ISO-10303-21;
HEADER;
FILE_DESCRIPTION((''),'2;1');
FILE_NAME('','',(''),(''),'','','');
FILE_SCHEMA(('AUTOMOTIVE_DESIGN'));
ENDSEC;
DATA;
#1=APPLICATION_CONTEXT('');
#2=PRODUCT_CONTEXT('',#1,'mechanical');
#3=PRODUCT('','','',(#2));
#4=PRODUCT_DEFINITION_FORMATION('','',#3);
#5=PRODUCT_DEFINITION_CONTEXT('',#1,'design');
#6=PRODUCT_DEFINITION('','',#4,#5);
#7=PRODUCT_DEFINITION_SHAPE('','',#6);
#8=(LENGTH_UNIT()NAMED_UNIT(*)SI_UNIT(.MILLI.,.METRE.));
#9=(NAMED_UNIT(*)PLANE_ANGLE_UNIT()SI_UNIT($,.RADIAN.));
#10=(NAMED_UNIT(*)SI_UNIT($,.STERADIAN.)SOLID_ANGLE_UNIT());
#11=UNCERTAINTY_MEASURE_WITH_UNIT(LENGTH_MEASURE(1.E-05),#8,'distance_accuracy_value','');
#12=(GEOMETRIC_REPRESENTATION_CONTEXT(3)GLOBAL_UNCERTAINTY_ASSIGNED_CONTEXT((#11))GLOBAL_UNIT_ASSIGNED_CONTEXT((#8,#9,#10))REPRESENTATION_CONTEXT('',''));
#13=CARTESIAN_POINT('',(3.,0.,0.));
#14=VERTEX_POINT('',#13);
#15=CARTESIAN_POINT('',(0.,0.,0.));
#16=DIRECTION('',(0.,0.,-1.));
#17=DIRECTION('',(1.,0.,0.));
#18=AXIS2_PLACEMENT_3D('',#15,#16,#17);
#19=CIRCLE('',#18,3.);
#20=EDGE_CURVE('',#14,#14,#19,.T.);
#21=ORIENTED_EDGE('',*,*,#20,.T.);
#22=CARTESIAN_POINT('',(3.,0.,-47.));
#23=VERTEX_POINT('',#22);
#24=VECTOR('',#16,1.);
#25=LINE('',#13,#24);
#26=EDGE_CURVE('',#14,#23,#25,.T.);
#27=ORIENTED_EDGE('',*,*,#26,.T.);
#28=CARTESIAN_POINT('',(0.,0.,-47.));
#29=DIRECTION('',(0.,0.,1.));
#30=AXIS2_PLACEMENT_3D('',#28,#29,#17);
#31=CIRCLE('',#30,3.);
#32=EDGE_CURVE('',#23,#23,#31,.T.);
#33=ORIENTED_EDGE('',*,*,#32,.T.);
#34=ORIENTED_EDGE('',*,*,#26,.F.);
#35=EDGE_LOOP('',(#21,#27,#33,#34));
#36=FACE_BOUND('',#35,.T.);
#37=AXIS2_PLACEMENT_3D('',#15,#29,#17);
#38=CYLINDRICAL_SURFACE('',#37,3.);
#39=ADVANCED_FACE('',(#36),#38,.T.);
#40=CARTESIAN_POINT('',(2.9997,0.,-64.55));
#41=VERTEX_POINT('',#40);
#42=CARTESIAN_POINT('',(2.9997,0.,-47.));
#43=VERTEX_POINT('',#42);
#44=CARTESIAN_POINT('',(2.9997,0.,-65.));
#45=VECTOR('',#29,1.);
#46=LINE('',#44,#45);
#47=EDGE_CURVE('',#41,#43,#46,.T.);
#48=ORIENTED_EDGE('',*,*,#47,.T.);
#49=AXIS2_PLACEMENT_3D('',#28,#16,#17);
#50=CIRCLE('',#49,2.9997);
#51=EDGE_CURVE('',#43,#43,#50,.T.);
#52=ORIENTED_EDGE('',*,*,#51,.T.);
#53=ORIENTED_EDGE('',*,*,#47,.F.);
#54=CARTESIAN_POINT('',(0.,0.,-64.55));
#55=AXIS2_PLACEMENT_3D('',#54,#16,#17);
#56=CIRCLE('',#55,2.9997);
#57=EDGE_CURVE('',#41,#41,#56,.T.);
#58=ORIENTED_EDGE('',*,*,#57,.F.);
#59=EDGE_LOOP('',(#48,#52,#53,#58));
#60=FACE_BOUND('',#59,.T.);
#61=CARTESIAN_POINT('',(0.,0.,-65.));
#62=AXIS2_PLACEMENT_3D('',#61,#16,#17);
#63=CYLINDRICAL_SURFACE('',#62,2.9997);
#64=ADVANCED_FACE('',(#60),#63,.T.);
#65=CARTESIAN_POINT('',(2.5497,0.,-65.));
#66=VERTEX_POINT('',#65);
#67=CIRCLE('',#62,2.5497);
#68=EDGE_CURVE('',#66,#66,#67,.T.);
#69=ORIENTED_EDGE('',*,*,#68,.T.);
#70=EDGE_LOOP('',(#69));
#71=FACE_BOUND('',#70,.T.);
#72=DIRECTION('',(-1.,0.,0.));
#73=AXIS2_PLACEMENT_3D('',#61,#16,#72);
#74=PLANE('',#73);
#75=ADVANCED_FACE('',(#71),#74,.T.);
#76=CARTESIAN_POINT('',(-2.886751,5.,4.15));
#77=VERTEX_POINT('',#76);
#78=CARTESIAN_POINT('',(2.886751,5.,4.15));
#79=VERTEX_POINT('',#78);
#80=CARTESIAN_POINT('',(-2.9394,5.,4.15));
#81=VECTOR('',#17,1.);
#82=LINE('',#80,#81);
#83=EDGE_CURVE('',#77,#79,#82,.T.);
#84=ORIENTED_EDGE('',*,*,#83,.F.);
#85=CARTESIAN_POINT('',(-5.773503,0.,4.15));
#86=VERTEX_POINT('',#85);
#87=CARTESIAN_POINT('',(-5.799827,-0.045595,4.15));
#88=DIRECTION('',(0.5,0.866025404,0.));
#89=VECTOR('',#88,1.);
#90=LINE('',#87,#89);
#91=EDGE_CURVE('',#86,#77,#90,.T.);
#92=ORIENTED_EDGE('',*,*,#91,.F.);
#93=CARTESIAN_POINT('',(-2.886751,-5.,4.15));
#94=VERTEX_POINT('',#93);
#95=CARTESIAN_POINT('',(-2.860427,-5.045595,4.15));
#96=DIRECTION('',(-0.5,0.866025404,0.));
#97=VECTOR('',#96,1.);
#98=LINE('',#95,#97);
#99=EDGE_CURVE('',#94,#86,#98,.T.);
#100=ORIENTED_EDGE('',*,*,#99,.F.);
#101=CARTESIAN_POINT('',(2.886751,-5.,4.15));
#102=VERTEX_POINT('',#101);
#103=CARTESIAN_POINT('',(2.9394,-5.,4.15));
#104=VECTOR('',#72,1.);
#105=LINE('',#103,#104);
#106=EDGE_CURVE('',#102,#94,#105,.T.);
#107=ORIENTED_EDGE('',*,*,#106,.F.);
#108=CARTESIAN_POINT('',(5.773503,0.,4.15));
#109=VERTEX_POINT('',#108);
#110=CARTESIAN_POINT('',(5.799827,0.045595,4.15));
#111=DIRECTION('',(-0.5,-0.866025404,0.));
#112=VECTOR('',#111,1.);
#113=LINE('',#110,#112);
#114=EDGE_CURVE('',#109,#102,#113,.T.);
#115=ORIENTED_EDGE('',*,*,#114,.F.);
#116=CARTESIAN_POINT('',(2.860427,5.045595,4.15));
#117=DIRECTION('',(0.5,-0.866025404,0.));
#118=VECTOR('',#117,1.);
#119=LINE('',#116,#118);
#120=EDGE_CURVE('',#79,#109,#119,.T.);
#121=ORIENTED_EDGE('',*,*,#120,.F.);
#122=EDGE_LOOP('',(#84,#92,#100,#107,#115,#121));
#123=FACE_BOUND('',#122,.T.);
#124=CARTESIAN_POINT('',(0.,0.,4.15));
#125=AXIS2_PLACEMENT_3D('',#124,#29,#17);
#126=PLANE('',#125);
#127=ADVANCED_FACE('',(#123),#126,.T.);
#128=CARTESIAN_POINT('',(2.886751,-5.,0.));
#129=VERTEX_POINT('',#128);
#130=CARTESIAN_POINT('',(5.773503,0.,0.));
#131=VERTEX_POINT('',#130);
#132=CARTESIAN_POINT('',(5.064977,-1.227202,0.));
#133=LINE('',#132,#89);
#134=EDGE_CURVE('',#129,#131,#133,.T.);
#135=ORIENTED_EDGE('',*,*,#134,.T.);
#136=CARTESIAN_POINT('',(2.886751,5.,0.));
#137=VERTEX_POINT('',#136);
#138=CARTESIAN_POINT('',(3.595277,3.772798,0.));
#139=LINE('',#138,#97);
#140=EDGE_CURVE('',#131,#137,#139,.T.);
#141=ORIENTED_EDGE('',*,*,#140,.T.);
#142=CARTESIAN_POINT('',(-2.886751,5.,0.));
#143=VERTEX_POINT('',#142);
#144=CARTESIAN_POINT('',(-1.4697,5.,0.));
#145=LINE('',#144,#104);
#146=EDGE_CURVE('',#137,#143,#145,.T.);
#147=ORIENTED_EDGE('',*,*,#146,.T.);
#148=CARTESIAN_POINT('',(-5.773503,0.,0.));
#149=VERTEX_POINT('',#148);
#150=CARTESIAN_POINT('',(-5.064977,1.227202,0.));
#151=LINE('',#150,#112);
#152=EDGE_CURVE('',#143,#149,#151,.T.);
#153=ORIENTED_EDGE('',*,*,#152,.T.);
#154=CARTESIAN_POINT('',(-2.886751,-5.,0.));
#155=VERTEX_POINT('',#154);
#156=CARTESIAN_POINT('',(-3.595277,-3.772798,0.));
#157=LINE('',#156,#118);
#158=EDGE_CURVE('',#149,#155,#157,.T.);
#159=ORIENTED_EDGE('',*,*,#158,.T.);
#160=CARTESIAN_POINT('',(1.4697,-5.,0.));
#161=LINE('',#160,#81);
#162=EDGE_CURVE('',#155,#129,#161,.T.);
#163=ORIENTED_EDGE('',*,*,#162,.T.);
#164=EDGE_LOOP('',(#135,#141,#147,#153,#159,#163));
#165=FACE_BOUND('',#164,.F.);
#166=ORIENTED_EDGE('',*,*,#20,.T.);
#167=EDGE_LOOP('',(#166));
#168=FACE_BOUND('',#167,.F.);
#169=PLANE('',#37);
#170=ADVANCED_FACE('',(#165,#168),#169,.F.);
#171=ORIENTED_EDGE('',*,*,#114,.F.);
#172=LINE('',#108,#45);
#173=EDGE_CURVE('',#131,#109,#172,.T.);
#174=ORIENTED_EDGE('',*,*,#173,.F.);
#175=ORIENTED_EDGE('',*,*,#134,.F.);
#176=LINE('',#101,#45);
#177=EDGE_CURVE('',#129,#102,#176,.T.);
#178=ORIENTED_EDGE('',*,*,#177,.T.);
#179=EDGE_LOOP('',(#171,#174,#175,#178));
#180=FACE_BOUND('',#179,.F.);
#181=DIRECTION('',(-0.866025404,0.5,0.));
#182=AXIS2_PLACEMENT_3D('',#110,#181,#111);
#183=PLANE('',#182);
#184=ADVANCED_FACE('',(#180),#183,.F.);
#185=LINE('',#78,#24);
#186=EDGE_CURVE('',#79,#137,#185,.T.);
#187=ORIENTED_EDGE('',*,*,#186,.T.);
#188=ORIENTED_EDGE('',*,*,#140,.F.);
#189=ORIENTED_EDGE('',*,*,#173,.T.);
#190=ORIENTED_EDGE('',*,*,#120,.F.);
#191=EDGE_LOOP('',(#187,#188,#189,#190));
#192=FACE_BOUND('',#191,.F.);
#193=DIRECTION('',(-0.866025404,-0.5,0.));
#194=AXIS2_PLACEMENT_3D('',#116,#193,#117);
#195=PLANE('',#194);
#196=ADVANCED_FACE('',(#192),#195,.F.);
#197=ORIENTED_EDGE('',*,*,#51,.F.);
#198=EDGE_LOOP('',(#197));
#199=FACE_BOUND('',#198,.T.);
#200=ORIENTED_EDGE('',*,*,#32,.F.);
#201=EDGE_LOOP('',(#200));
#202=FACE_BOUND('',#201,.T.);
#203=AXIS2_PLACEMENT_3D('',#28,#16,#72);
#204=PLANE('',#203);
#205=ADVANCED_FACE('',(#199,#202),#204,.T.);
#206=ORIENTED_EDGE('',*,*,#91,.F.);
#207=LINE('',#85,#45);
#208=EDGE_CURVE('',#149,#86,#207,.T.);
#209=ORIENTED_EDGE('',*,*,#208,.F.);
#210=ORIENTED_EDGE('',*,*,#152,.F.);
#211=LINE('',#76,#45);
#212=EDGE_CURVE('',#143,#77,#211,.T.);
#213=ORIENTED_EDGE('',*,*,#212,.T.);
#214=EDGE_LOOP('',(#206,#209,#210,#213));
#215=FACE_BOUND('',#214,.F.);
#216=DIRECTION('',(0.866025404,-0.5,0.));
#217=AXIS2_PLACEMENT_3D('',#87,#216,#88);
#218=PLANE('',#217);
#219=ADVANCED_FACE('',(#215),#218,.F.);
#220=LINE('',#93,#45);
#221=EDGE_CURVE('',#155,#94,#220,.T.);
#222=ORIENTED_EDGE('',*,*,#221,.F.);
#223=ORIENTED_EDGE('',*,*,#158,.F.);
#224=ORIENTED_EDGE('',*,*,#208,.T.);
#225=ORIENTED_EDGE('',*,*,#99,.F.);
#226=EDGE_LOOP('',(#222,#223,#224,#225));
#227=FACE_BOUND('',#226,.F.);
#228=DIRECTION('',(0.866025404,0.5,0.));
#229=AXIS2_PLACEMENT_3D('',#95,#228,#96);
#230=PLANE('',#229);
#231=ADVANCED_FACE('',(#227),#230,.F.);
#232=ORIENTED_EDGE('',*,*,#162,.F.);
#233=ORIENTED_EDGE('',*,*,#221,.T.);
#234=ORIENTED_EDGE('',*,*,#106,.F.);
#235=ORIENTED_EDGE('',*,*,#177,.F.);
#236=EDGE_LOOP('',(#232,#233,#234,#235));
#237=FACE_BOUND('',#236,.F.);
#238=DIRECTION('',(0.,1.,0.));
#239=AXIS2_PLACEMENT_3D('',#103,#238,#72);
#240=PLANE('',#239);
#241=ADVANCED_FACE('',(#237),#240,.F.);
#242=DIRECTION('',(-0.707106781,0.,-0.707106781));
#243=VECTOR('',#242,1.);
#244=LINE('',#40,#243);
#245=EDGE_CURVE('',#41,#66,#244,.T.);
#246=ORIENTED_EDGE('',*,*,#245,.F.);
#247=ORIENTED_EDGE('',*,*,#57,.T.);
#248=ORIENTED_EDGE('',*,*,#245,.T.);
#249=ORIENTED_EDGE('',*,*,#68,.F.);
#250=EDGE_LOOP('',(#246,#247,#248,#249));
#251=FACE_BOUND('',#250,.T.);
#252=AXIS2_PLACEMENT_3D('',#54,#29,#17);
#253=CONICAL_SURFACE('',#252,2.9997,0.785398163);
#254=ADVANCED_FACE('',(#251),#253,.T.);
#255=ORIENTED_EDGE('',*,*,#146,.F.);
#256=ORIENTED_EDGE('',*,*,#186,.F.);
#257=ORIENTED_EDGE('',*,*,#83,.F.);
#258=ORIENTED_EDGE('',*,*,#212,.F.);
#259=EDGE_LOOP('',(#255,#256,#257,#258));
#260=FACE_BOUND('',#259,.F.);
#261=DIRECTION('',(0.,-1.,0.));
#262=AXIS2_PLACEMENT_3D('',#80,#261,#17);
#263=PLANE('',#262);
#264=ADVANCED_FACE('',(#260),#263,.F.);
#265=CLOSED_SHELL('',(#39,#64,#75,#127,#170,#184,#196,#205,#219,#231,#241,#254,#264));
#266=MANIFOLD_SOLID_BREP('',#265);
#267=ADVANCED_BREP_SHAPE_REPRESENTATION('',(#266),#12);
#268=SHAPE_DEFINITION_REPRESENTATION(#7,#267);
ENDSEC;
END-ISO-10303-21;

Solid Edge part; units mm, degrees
sketch "Sketch1" plane through (0, 0, 0) normal (0, 0, 1) x (1, 0, 0)
  circle A0 centre (0, 0) radius 5.8
  dimension "D1" = 11.6
extrude "Protrusion1" add sketch "Sketch1" along normal blind 4.15
sketch "Sketch2" plane through (0, 0, 0) normal (0, 0, -1) x (1, 0, 0)
  circle A0 centre (0, 0) radius 3
extrude "Protrusion2" add sketch "Sketch2" along normal blind 65
sketch "Sketch3" plane through (0, 0, -65) normal (0, 0, -1) x (1, 0, 0)
  circle A0 centre (0, 0) radius 2.9997
extrude "Cutout1" cut sketch "Sketch3" against normal blind 18 flip side to cut
chamfer "Chamfer_1" distance 0.45 angle 45 1 edges at (-2.9997, 0, -65)
sketch "Sketch4" plane through (0, 0, 4.15) normal (0, 0, 1) x (1, 0, 0)
  line L0 (-2.9394, 5) -> (2.9394, 5)
  dimension "D1" = 10
extrude "Cutout2" cut sketch "Sketch4" against normal up to next material side at (0, 5.05, 4.15)
pattern_circular "Pattern1" count 6 over 360 about axis through (0, 0, 4.15) along (0, 0, 1) of "Cutout2"
properties part number "24104767"
